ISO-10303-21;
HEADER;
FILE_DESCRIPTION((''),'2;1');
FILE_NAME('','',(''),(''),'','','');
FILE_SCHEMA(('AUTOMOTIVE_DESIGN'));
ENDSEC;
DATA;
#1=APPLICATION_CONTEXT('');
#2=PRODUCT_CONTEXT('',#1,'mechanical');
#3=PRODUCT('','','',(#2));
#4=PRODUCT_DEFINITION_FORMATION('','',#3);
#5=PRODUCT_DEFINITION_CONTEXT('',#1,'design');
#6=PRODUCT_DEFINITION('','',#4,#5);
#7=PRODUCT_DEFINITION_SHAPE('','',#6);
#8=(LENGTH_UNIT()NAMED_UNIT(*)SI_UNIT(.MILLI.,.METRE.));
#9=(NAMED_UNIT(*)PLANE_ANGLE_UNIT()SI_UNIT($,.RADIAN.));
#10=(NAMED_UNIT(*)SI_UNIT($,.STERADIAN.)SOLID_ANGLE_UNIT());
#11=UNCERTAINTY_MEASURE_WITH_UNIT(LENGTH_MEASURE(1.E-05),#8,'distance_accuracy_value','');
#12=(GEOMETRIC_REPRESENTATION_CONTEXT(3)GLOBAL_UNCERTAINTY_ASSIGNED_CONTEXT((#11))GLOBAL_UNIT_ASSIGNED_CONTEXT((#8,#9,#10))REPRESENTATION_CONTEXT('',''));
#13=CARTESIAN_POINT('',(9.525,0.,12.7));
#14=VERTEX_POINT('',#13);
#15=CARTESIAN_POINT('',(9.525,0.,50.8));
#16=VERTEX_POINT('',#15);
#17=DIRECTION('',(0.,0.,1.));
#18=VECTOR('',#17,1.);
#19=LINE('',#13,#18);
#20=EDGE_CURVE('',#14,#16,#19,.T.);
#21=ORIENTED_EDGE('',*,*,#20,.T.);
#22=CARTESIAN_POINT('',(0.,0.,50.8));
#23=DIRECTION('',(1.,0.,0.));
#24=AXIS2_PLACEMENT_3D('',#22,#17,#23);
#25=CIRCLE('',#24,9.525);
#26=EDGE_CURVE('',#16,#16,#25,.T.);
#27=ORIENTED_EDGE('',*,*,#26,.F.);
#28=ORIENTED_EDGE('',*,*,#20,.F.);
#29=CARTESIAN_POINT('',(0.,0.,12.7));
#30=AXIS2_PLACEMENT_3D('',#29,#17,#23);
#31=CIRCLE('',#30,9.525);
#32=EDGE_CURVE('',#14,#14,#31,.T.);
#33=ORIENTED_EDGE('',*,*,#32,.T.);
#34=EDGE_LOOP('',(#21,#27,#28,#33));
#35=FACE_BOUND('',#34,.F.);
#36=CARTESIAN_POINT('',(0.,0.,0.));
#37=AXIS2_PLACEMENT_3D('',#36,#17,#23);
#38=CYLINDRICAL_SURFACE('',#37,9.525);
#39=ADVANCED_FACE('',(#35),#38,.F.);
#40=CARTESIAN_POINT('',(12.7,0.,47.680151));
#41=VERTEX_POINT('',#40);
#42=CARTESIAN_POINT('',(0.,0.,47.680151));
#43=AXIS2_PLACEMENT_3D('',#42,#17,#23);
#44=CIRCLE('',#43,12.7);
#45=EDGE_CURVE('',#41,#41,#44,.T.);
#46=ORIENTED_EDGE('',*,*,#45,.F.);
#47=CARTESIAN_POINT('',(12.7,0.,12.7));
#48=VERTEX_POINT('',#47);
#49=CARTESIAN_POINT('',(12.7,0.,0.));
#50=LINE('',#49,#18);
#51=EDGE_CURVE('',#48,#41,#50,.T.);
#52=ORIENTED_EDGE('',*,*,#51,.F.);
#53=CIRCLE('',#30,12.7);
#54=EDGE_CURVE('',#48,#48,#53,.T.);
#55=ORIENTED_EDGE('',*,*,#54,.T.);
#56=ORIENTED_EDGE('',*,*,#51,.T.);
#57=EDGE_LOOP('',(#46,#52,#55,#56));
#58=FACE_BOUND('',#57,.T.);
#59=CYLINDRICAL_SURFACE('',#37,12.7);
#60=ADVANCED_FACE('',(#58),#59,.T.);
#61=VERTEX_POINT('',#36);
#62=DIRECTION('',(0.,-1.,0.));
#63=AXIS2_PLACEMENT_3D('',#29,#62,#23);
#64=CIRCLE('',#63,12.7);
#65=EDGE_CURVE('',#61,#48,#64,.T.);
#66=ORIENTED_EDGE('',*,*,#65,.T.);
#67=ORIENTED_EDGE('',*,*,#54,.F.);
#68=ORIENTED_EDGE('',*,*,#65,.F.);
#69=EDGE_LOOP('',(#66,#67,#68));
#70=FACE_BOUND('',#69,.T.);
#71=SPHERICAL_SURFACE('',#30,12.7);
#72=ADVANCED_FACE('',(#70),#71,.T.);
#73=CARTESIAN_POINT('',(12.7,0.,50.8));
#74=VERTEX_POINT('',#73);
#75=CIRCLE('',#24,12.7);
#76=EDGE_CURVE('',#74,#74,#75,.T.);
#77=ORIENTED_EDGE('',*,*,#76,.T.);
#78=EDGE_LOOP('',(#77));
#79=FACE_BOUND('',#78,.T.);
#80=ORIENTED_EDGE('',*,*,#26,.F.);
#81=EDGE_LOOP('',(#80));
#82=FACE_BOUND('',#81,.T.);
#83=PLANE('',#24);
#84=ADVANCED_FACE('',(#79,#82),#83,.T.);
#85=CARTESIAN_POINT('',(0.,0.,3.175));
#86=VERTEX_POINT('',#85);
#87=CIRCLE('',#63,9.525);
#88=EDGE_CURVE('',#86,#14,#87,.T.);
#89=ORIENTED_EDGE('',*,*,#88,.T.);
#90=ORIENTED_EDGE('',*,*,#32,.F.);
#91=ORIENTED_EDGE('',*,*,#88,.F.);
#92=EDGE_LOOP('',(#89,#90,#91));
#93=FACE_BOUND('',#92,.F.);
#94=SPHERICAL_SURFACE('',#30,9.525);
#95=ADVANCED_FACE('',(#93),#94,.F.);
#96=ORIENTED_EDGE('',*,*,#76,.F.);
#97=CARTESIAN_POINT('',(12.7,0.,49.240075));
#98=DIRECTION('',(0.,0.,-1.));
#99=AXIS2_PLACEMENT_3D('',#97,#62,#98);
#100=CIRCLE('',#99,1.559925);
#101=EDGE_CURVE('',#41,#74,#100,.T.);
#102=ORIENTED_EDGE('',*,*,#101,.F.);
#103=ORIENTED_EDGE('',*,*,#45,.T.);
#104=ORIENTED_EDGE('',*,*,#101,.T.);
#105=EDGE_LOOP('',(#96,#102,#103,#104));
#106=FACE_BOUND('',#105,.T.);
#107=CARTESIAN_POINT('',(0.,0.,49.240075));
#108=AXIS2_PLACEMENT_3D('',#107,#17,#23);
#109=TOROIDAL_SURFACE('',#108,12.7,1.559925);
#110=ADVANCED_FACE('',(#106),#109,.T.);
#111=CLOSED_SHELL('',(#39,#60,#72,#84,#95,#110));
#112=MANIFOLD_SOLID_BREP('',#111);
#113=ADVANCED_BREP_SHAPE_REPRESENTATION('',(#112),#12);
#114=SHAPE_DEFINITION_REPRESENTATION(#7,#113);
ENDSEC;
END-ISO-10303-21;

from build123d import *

# Parameters (mm, degrees)
F2_R = 12.7
F3_T = 3.175


# Not quite as in the source:
# - a shell that OpenCascade refuses in one call is made with other operations: the cavity is built on its own and cut out


with BuildPart() as f1:
    # F0 (on Front) → F1 (revolve)
    with BuildSketch(Plane.XZ):
        Polygon((0, 50.8), (0, 0), (12.7, 0), (12.7, 47.6801507175), (12.7, 50.8), align=None)
        with BuildLine():
            ThreePointArc((12.7, 47.6801507175), (14.2599246413, 49.2400753587), (12.7, 50.8))
            Line((12.7, 50.8), (12.7, 47.6801507175))
        make_face()
    revolve(axis=Axis((0, 0, 25.4), (0, 0, 1)))

    # F2
    f2_edges = [f1.edges().sort_by_distance(p)[0] for p in [
        (-12.7, 0, 0),
    ]]
    fillet(f2_edges, radius=F2_R)

    # F3: shell of thickness 3.175, made by hand


with BuildPart() as f3_core1:
    # F3_t2: copy of F1
    add(f1.part)

    # the walls: a layer under each face that stays
    f3_faces = [f3_core1.faces().sort_by_distance(p)[0] for p in [
        (-12.7, 0, 30.1900753587),
        (-8.9802561211, 0, 3.7197438789),
    ]]
    thicken(f3_faces, amount=-F3_T, mode=Mode.SUBTRACT)

    # F3_s3 → F3_t4 (revolve, cut)
    with BuildSketch(Plane.XZ):
        Polygon((12.73175, 47.6484007175), (9.525, 47.6801507175), (9.525, 50.8551507175), (12.7, 50.8551507175), align=None)
    revolve(axis=Axis((0, 0, 47.6801507175), (0, 0, 1)), mode=Mode.SUBTRACT)


with BuildPart() as f1_1:
    add(f1.part)

    # what is left inside the walls is the cavity
    f3_cavity = [f3_core1.part.solids().sort_by_distance(p)[0] for p in [
        (-9.49325, 0, 25.4),
    ]]
    add(f3_cavity, mode=Mode.SUBTRACT)


solid = f1_1.part
